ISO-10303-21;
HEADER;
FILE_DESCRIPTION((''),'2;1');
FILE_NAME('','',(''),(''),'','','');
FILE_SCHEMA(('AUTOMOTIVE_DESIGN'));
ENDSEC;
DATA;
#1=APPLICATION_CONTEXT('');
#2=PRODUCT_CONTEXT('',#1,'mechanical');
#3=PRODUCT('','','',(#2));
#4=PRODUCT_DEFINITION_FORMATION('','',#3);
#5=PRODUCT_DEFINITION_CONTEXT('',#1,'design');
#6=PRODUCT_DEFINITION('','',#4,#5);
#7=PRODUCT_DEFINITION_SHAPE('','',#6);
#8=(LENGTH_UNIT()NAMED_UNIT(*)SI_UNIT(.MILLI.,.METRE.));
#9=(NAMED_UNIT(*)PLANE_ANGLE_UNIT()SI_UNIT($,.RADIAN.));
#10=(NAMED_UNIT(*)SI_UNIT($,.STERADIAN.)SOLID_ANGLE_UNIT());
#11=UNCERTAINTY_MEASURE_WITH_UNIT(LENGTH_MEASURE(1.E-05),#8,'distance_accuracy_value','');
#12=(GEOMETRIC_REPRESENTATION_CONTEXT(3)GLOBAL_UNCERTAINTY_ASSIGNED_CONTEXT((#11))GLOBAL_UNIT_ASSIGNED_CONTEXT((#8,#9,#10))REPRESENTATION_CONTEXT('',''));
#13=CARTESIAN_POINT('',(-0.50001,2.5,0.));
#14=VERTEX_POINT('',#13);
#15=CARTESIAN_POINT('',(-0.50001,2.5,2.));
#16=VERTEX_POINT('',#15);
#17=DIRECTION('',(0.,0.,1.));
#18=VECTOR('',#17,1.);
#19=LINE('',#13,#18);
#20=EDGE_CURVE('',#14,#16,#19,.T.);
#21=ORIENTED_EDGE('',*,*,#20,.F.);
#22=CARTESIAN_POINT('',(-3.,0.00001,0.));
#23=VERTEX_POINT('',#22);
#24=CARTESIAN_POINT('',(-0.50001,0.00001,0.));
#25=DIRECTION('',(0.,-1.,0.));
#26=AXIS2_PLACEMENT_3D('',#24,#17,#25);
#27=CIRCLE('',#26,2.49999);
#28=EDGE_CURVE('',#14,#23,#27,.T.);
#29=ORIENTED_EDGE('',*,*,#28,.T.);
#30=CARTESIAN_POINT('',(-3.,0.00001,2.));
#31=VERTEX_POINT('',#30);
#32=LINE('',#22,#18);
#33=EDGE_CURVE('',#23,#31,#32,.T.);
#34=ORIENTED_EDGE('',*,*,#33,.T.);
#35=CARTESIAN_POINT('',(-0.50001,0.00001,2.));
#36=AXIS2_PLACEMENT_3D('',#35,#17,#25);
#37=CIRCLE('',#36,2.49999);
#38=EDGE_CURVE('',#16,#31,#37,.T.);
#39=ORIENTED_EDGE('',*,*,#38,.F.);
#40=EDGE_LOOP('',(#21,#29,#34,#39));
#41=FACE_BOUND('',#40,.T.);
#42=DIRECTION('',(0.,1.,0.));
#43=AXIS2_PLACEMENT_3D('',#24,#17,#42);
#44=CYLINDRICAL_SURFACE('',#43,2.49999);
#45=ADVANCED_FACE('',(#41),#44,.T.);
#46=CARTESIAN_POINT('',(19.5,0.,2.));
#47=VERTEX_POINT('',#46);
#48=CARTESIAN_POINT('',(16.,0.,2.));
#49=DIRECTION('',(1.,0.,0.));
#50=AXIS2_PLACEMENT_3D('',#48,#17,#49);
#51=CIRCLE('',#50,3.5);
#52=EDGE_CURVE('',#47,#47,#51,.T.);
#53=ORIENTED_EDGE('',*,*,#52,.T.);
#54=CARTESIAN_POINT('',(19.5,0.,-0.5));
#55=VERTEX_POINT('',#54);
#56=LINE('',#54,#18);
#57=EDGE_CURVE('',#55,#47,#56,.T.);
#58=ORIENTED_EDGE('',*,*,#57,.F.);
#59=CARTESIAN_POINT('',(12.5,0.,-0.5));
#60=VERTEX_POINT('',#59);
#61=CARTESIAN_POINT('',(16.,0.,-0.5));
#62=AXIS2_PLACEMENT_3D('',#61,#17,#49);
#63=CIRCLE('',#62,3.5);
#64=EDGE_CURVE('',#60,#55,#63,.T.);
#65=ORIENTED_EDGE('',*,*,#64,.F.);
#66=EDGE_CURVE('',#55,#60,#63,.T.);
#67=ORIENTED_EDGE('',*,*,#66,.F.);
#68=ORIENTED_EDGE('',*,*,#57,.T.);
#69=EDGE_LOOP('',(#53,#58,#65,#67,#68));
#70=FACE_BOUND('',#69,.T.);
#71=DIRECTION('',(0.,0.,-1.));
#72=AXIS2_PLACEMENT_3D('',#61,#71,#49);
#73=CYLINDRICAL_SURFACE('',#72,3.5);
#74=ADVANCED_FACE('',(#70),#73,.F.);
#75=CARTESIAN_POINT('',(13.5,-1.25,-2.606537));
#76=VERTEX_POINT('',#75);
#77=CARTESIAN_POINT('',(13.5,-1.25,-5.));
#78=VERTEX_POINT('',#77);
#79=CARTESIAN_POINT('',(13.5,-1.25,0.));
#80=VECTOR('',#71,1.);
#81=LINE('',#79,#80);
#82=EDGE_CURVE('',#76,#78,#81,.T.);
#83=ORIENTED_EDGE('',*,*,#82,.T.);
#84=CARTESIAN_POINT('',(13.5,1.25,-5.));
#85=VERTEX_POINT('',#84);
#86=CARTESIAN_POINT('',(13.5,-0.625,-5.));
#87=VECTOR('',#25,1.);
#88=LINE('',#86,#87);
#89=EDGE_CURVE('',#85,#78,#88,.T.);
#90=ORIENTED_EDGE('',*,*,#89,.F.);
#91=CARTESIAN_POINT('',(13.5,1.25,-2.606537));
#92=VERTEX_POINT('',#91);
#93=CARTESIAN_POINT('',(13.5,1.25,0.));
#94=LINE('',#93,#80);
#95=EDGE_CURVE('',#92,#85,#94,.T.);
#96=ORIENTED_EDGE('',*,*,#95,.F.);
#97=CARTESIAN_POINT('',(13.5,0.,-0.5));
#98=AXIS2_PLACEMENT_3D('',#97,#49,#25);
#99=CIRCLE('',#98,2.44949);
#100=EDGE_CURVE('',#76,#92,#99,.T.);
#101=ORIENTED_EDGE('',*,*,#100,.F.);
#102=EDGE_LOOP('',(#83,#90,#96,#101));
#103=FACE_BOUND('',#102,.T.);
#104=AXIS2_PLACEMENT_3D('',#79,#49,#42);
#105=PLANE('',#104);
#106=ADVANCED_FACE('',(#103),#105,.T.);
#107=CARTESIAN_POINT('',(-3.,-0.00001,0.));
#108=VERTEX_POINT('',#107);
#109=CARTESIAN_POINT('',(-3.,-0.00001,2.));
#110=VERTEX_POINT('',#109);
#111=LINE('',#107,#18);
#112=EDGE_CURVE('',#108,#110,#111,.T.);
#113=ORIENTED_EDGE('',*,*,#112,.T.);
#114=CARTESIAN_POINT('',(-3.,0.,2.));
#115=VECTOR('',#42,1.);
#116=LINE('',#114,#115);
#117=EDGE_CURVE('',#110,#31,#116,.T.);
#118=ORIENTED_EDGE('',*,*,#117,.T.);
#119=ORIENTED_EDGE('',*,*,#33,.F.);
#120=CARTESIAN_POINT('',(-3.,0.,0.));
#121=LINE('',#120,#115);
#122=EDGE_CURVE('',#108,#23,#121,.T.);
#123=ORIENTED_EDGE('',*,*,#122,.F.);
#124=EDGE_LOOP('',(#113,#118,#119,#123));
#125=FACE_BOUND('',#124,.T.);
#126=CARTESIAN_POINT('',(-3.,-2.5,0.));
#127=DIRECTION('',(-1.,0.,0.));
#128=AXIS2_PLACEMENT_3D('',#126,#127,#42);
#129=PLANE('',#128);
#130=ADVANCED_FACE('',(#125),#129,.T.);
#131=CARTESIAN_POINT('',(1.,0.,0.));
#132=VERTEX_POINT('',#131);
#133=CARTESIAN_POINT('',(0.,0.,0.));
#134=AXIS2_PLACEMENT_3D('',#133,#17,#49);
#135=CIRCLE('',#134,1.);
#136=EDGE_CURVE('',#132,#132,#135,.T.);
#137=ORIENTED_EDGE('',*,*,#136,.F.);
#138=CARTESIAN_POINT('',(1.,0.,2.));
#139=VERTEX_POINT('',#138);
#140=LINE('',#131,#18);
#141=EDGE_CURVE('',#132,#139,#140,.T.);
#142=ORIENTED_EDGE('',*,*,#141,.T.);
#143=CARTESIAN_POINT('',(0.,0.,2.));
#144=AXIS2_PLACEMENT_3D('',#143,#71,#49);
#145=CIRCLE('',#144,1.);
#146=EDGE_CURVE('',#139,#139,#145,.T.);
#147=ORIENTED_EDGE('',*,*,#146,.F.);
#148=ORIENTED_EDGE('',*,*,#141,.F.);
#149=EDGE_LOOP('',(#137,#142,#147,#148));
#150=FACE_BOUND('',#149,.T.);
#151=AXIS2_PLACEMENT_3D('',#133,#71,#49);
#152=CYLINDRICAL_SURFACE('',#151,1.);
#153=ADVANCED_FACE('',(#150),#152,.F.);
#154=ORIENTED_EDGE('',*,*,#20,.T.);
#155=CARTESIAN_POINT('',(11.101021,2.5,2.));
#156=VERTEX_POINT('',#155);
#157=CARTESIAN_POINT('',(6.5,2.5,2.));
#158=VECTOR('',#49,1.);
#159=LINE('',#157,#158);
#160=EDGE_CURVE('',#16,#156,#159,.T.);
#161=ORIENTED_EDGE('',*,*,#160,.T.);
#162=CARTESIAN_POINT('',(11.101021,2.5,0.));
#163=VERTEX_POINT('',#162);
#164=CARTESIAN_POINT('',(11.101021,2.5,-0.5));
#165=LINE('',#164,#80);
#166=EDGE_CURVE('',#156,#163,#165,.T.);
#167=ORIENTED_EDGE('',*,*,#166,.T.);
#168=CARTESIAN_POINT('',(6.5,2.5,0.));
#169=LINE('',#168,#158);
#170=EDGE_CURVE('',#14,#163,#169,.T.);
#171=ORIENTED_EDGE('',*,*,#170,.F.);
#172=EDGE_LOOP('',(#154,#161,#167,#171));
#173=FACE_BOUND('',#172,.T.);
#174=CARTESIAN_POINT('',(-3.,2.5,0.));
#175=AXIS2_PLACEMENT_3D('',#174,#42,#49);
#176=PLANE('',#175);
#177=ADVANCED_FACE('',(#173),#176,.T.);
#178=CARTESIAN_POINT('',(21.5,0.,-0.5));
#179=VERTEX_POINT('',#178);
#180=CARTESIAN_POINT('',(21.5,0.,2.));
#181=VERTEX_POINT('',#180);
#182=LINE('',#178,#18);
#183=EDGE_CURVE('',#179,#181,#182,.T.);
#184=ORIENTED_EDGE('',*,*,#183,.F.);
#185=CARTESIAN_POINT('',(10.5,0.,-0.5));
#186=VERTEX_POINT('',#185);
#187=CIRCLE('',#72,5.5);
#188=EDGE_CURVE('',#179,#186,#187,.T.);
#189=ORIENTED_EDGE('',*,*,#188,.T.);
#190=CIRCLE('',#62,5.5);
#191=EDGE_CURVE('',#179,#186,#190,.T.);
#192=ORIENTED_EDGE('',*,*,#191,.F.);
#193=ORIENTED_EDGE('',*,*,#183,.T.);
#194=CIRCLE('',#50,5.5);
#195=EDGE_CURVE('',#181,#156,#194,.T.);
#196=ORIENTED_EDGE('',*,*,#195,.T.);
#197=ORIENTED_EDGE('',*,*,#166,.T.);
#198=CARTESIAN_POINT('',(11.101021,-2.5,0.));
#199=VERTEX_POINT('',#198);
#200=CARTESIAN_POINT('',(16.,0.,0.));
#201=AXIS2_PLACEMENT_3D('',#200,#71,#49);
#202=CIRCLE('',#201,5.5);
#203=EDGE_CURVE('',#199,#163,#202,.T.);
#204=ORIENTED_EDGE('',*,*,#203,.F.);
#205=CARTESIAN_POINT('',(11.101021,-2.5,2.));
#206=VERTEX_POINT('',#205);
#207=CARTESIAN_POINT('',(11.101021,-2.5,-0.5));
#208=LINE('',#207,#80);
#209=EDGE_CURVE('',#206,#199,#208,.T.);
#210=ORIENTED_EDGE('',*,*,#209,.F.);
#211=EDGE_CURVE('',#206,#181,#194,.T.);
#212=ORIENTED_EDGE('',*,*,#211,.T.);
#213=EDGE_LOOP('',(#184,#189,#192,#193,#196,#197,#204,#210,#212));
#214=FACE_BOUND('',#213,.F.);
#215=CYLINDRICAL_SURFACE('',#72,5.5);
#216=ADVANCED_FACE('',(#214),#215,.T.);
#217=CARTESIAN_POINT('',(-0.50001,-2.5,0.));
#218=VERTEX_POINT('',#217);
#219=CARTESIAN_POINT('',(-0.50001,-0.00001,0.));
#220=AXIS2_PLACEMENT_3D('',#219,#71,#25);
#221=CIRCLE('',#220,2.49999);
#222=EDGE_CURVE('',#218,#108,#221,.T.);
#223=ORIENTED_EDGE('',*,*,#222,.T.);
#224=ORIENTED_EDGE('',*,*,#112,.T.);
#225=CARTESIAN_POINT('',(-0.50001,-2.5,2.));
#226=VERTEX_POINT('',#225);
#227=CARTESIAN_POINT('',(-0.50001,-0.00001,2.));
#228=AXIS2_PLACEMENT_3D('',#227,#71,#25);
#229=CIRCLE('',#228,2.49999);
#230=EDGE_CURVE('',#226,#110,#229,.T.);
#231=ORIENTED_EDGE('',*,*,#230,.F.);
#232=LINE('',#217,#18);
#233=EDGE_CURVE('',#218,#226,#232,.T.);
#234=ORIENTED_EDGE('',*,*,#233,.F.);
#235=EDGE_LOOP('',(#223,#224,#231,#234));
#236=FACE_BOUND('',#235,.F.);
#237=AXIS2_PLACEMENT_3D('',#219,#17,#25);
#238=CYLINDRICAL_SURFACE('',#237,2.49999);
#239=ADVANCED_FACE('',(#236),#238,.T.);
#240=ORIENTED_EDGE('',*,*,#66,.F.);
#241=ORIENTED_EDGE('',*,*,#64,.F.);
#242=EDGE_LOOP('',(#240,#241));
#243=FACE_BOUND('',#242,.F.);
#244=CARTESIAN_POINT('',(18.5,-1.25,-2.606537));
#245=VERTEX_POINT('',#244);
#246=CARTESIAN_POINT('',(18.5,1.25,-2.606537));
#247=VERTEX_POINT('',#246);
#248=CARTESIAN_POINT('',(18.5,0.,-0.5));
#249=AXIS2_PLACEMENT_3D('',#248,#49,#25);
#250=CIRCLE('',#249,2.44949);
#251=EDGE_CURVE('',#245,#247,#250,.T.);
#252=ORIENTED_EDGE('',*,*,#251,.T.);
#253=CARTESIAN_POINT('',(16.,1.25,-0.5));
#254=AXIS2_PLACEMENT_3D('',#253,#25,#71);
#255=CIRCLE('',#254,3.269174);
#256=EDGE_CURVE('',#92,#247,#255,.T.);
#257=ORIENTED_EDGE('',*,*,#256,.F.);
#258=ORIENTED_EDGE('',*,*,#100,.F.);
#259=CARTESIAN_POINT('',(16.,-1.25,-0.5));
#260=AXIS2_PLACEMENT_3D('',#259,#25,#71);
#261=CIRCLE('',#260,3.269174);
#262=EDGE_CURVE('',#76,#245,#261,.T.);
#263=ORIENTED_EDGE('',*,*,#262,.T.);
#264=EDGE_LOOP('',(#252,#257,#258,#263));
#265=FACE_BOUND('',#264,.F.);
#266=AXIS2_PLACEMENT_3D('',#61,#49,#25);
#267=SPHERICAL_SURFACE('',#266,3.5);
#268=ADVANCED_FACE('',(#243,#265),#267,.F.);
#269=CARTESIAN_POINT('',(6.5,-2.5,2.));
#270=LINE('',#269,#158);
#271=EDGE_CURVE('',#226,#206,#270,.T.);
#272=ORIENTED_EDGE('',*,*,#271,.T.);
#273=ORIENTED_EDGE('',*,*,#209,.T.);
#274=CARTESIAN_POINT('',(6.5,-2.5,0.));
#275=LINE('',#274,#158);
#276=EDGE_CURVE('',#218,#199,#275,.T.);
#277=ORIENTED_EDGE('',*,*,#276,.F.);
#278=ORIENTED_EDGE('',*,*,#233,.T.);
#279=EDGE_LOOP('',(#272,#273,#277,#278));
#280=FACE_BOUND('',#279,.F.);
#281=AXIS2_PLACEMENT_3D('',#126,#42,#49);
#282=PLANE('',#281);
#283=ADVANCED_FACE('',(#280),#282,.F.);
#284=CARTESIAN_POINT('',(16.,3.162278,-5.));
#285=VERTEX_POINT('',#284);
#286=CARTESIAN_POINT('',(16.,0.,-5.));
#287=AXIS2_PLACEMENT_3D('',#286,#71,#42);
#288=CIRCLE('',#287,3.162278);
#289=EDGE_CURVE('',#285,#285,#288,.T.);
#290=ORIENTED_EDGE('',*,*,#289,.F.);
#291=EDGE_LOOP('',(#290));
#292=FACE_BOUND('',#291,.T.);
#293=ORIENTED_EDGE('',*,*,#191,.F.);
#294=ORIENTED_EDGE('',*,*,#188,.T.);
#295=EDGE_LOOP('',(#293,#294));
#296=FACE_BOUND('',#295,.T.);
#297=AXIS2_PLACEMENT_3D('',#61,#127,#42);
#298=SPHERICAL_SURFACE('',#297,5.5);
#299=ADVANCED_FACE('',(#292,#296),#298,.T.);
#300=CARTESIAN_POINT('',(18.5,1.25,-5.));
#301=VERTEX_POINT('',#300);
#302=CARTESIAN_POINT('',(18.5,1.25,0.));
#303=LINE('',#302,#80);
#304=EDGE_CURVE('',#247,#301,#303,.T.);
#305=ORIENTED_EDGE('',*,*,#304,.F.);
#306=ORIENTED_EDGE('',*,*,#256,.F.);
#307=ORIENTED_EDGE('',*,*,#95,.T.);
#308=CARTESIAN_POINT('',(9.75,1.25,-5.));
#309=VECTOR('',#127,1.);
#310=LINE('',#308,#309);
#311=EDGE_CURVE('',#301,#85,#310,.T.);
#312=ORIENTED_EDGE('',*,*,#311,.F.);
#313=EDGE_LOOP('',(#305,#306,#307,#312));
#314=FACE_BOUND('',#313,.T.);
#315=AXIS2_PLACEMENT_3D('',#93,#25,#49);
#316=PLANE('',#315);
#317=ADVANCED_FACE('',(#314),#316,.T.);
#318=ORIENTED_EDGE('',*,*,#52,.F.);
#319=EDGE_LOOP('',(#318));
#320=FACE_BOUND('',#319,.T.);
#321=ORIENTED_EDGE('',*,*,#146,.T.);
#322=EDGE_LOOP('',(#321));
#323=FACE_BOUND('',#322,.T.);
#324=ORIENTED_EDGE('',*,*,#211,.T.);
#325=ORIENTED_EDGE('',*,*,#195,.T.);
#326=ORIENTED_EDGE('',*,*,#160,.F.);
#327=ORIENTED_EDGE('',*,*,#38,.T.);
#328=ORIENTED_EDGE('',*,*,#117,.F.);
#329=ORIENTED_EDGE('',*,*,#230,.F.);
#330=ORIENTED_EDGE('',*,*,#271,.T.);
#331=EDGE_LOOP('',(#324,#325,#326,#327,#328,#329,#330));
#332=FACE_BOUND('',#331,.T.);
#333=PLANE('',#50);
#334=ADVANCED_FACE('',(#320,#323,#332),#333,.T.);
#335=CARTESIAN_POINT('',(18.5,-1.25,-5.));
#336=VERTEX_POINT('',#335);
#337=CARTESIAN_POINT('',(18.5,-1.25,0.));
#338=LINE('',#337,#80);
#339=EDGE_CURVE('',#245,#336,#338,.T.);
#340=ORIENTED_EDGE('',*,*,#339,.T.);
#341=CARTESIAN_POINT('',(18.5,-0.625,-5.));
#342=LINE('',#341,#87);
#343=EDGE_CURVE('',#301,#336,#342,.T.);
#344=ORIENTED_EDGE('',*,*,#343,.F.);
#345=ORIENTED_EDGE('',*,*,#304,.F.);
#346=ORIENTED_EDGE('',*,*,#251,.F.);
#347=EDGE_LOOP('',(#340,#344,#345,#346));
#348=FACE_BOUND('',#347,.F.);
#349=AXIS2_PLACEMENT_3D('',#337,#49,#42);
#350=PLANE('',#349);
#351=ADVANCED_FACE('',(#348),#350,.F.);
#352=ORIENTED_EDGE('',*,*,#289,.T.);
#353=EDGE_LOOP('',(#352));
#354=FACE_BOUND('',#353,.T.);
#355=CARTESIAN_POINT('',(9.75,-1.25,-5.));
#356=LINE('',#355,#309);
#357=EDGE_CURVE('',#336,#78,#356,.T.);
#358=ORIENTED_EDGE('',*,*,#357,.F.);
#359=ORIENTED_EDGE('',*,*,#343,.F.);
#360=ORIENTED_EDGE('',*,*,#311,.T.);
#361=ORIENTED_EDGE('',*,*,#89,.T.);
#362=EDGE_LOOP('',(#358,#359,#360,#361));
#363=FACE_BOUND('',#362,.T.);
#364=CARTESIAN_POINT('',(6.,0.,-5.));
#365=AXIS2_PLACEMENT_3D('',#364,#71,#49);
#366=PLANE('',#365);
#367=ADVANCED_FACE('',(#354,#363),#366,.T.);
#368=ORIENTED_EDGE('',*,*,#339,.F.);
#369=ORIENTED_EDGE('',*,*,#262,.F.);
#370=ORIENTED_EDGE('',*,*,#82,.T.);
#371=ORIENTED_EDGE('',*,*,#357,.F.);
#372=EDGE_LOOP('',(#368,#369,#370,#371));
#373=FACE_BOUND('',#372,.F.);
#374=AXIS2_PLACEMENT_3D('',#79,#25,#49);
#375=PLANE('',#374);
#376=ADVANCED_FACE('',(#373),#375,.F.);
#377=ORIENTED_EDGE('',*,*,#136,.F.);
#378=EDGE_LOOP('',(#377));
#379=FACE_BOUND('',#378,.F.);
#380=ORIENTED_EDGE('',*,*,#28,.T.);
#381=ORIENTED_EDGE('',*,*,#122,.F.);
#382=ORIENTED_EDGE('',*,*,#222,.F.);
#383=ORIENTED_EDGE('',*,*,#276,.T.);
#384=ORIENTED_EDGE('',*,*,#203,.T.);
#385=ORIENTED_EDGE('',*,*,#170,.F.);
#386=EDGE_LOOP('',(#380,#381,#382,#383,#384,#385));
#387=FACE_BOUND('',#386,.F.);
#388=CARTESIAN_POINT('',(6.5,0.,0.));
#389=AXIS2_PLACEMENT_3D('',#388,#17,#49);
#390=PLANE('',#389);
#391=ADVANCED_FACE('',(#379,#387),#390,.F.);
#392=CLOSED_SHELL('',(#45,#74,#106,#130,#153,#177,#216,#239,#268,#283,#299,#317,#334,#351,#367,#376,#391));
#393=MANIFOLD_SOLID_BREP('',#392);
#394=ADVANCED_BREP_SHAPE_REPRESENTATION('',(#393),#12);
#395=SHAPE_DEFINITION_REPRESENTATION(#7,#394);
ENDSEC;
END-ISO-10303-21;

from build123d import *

# Parameters (mm, degrees)
F0_W      = 19
F0_H      = 5
F1_DEPTH  = 2
F4_ANGLE  = 180
F5_R      = 5.5
F6_DEPTH  = 2.5
F7_R      = 3.5
F8_DEPTH  = 2.5
F11_W     = 20
F11_H     = 5
F12_DEPTH = 12.5
F13_W     = 5
F13_H     = 2.5
F14_DEPTH = 25
F15_R     = 1
F16_DEPTH = 25
F17_R     = 2.49999


# Not quite as in the source:
# - a fillet or chamfer is up to 0.001 mm smaller than in the source, because OpenCascade refuses the exact size


with BuildPart() as f1:
    # F0 (on Top) → F1 (new body)
    with BuildSketch(Plane.XY):
        with Locations((6.5, 0)):
            Rectangle(F0_W, F0_H)
    extrude(amount=F1_DEPTH)



with BuildPart() as f4:
    # F3 (on offset) → F4 (revolve)
    with BuildSketch(Plane.XY.offset(-0.5)):
        with BuildLine():
            ThreePointArc((21.5, 0), (16, 5.5), (10.5, 0))
            Line((10.5, 0), (21.5, 0))
        make_face()
    revolve(axis=Axis((22.6478228122, 0, -0.5), (-1, 0, 0)), revolution_arc=F4_ANGLE)


with BuildPart() as f1_1:
    add(f1.part)

    add(f4.part)  # F6 merges F4
    # F5 (on offset) → F6 (join, through all)
    with BuildSketch(Plane.XY.offset(-0.5)):
        with Locations((16, 0)):
            Circle(F5_R)
    extrude(amount=F6_DEPTH)

    # F7 (on offset) → F8 (cut, through all)
    with BuildSketch(Plane.XY.offset(-0.5)):
        with Locations((16, 0)):
            Circle(F7_R)
    extrude(amount=F8_DEPTH, mode=Mode.SUBTRACT)

    # F9 (on offset) → F10 (revolve, cut)
    with BuildSketch(Plane.XY.offset(-0.5)):
        with BuildLine():
            ThreePointArc((12.5, 0), (16, -3.5), (19.5, 0))
            Line((19.5, 0), (12.5, 0))
        make_face()
    revolve(axis=Axis((18.6947258189, 0, -0.5), (1, 0, 0)), mode=Mode.SUBTRACT)

    # F11 (on Front) → F12 (cut, symmetric)
    with BuildSketch(Plane.XZ):
        with Locations((16, -7.5)):
            Rectangle(F11_W, F11_H)
    extrude(amount=F12_DEPTH, both=True, mode=Mode.SUBTRACT)

    # F13 (on Top) → F14 (cut)
    with BuildSketch(Plane.XY):
        with Locations((16, 0)):
            Rectangle(F13_W, F13_H)
    extrude(amount=-F14_DEPTH, mode=Mode.SUBTRACT)

    # F15 (on Top) → F16 (cut)
    with BuildSketch(Plane.XY):
        Circle(F15_R)
    extrude(amount=F16_DEPTH, mode=Mode.SUBTRACT)

    # F17 (radius 2.5 in the source; OpenCascade refuses exactly that, so slightly less here)
    f17_edges = [f1_1.edges().sort_by_distance(p)[0] for p in [
        (-3, -2.5, 1),
        (-3, 2.5, 1),
    ]]
    fillet(f17_edges, radius=F17_R)


solid = f1_1.part
